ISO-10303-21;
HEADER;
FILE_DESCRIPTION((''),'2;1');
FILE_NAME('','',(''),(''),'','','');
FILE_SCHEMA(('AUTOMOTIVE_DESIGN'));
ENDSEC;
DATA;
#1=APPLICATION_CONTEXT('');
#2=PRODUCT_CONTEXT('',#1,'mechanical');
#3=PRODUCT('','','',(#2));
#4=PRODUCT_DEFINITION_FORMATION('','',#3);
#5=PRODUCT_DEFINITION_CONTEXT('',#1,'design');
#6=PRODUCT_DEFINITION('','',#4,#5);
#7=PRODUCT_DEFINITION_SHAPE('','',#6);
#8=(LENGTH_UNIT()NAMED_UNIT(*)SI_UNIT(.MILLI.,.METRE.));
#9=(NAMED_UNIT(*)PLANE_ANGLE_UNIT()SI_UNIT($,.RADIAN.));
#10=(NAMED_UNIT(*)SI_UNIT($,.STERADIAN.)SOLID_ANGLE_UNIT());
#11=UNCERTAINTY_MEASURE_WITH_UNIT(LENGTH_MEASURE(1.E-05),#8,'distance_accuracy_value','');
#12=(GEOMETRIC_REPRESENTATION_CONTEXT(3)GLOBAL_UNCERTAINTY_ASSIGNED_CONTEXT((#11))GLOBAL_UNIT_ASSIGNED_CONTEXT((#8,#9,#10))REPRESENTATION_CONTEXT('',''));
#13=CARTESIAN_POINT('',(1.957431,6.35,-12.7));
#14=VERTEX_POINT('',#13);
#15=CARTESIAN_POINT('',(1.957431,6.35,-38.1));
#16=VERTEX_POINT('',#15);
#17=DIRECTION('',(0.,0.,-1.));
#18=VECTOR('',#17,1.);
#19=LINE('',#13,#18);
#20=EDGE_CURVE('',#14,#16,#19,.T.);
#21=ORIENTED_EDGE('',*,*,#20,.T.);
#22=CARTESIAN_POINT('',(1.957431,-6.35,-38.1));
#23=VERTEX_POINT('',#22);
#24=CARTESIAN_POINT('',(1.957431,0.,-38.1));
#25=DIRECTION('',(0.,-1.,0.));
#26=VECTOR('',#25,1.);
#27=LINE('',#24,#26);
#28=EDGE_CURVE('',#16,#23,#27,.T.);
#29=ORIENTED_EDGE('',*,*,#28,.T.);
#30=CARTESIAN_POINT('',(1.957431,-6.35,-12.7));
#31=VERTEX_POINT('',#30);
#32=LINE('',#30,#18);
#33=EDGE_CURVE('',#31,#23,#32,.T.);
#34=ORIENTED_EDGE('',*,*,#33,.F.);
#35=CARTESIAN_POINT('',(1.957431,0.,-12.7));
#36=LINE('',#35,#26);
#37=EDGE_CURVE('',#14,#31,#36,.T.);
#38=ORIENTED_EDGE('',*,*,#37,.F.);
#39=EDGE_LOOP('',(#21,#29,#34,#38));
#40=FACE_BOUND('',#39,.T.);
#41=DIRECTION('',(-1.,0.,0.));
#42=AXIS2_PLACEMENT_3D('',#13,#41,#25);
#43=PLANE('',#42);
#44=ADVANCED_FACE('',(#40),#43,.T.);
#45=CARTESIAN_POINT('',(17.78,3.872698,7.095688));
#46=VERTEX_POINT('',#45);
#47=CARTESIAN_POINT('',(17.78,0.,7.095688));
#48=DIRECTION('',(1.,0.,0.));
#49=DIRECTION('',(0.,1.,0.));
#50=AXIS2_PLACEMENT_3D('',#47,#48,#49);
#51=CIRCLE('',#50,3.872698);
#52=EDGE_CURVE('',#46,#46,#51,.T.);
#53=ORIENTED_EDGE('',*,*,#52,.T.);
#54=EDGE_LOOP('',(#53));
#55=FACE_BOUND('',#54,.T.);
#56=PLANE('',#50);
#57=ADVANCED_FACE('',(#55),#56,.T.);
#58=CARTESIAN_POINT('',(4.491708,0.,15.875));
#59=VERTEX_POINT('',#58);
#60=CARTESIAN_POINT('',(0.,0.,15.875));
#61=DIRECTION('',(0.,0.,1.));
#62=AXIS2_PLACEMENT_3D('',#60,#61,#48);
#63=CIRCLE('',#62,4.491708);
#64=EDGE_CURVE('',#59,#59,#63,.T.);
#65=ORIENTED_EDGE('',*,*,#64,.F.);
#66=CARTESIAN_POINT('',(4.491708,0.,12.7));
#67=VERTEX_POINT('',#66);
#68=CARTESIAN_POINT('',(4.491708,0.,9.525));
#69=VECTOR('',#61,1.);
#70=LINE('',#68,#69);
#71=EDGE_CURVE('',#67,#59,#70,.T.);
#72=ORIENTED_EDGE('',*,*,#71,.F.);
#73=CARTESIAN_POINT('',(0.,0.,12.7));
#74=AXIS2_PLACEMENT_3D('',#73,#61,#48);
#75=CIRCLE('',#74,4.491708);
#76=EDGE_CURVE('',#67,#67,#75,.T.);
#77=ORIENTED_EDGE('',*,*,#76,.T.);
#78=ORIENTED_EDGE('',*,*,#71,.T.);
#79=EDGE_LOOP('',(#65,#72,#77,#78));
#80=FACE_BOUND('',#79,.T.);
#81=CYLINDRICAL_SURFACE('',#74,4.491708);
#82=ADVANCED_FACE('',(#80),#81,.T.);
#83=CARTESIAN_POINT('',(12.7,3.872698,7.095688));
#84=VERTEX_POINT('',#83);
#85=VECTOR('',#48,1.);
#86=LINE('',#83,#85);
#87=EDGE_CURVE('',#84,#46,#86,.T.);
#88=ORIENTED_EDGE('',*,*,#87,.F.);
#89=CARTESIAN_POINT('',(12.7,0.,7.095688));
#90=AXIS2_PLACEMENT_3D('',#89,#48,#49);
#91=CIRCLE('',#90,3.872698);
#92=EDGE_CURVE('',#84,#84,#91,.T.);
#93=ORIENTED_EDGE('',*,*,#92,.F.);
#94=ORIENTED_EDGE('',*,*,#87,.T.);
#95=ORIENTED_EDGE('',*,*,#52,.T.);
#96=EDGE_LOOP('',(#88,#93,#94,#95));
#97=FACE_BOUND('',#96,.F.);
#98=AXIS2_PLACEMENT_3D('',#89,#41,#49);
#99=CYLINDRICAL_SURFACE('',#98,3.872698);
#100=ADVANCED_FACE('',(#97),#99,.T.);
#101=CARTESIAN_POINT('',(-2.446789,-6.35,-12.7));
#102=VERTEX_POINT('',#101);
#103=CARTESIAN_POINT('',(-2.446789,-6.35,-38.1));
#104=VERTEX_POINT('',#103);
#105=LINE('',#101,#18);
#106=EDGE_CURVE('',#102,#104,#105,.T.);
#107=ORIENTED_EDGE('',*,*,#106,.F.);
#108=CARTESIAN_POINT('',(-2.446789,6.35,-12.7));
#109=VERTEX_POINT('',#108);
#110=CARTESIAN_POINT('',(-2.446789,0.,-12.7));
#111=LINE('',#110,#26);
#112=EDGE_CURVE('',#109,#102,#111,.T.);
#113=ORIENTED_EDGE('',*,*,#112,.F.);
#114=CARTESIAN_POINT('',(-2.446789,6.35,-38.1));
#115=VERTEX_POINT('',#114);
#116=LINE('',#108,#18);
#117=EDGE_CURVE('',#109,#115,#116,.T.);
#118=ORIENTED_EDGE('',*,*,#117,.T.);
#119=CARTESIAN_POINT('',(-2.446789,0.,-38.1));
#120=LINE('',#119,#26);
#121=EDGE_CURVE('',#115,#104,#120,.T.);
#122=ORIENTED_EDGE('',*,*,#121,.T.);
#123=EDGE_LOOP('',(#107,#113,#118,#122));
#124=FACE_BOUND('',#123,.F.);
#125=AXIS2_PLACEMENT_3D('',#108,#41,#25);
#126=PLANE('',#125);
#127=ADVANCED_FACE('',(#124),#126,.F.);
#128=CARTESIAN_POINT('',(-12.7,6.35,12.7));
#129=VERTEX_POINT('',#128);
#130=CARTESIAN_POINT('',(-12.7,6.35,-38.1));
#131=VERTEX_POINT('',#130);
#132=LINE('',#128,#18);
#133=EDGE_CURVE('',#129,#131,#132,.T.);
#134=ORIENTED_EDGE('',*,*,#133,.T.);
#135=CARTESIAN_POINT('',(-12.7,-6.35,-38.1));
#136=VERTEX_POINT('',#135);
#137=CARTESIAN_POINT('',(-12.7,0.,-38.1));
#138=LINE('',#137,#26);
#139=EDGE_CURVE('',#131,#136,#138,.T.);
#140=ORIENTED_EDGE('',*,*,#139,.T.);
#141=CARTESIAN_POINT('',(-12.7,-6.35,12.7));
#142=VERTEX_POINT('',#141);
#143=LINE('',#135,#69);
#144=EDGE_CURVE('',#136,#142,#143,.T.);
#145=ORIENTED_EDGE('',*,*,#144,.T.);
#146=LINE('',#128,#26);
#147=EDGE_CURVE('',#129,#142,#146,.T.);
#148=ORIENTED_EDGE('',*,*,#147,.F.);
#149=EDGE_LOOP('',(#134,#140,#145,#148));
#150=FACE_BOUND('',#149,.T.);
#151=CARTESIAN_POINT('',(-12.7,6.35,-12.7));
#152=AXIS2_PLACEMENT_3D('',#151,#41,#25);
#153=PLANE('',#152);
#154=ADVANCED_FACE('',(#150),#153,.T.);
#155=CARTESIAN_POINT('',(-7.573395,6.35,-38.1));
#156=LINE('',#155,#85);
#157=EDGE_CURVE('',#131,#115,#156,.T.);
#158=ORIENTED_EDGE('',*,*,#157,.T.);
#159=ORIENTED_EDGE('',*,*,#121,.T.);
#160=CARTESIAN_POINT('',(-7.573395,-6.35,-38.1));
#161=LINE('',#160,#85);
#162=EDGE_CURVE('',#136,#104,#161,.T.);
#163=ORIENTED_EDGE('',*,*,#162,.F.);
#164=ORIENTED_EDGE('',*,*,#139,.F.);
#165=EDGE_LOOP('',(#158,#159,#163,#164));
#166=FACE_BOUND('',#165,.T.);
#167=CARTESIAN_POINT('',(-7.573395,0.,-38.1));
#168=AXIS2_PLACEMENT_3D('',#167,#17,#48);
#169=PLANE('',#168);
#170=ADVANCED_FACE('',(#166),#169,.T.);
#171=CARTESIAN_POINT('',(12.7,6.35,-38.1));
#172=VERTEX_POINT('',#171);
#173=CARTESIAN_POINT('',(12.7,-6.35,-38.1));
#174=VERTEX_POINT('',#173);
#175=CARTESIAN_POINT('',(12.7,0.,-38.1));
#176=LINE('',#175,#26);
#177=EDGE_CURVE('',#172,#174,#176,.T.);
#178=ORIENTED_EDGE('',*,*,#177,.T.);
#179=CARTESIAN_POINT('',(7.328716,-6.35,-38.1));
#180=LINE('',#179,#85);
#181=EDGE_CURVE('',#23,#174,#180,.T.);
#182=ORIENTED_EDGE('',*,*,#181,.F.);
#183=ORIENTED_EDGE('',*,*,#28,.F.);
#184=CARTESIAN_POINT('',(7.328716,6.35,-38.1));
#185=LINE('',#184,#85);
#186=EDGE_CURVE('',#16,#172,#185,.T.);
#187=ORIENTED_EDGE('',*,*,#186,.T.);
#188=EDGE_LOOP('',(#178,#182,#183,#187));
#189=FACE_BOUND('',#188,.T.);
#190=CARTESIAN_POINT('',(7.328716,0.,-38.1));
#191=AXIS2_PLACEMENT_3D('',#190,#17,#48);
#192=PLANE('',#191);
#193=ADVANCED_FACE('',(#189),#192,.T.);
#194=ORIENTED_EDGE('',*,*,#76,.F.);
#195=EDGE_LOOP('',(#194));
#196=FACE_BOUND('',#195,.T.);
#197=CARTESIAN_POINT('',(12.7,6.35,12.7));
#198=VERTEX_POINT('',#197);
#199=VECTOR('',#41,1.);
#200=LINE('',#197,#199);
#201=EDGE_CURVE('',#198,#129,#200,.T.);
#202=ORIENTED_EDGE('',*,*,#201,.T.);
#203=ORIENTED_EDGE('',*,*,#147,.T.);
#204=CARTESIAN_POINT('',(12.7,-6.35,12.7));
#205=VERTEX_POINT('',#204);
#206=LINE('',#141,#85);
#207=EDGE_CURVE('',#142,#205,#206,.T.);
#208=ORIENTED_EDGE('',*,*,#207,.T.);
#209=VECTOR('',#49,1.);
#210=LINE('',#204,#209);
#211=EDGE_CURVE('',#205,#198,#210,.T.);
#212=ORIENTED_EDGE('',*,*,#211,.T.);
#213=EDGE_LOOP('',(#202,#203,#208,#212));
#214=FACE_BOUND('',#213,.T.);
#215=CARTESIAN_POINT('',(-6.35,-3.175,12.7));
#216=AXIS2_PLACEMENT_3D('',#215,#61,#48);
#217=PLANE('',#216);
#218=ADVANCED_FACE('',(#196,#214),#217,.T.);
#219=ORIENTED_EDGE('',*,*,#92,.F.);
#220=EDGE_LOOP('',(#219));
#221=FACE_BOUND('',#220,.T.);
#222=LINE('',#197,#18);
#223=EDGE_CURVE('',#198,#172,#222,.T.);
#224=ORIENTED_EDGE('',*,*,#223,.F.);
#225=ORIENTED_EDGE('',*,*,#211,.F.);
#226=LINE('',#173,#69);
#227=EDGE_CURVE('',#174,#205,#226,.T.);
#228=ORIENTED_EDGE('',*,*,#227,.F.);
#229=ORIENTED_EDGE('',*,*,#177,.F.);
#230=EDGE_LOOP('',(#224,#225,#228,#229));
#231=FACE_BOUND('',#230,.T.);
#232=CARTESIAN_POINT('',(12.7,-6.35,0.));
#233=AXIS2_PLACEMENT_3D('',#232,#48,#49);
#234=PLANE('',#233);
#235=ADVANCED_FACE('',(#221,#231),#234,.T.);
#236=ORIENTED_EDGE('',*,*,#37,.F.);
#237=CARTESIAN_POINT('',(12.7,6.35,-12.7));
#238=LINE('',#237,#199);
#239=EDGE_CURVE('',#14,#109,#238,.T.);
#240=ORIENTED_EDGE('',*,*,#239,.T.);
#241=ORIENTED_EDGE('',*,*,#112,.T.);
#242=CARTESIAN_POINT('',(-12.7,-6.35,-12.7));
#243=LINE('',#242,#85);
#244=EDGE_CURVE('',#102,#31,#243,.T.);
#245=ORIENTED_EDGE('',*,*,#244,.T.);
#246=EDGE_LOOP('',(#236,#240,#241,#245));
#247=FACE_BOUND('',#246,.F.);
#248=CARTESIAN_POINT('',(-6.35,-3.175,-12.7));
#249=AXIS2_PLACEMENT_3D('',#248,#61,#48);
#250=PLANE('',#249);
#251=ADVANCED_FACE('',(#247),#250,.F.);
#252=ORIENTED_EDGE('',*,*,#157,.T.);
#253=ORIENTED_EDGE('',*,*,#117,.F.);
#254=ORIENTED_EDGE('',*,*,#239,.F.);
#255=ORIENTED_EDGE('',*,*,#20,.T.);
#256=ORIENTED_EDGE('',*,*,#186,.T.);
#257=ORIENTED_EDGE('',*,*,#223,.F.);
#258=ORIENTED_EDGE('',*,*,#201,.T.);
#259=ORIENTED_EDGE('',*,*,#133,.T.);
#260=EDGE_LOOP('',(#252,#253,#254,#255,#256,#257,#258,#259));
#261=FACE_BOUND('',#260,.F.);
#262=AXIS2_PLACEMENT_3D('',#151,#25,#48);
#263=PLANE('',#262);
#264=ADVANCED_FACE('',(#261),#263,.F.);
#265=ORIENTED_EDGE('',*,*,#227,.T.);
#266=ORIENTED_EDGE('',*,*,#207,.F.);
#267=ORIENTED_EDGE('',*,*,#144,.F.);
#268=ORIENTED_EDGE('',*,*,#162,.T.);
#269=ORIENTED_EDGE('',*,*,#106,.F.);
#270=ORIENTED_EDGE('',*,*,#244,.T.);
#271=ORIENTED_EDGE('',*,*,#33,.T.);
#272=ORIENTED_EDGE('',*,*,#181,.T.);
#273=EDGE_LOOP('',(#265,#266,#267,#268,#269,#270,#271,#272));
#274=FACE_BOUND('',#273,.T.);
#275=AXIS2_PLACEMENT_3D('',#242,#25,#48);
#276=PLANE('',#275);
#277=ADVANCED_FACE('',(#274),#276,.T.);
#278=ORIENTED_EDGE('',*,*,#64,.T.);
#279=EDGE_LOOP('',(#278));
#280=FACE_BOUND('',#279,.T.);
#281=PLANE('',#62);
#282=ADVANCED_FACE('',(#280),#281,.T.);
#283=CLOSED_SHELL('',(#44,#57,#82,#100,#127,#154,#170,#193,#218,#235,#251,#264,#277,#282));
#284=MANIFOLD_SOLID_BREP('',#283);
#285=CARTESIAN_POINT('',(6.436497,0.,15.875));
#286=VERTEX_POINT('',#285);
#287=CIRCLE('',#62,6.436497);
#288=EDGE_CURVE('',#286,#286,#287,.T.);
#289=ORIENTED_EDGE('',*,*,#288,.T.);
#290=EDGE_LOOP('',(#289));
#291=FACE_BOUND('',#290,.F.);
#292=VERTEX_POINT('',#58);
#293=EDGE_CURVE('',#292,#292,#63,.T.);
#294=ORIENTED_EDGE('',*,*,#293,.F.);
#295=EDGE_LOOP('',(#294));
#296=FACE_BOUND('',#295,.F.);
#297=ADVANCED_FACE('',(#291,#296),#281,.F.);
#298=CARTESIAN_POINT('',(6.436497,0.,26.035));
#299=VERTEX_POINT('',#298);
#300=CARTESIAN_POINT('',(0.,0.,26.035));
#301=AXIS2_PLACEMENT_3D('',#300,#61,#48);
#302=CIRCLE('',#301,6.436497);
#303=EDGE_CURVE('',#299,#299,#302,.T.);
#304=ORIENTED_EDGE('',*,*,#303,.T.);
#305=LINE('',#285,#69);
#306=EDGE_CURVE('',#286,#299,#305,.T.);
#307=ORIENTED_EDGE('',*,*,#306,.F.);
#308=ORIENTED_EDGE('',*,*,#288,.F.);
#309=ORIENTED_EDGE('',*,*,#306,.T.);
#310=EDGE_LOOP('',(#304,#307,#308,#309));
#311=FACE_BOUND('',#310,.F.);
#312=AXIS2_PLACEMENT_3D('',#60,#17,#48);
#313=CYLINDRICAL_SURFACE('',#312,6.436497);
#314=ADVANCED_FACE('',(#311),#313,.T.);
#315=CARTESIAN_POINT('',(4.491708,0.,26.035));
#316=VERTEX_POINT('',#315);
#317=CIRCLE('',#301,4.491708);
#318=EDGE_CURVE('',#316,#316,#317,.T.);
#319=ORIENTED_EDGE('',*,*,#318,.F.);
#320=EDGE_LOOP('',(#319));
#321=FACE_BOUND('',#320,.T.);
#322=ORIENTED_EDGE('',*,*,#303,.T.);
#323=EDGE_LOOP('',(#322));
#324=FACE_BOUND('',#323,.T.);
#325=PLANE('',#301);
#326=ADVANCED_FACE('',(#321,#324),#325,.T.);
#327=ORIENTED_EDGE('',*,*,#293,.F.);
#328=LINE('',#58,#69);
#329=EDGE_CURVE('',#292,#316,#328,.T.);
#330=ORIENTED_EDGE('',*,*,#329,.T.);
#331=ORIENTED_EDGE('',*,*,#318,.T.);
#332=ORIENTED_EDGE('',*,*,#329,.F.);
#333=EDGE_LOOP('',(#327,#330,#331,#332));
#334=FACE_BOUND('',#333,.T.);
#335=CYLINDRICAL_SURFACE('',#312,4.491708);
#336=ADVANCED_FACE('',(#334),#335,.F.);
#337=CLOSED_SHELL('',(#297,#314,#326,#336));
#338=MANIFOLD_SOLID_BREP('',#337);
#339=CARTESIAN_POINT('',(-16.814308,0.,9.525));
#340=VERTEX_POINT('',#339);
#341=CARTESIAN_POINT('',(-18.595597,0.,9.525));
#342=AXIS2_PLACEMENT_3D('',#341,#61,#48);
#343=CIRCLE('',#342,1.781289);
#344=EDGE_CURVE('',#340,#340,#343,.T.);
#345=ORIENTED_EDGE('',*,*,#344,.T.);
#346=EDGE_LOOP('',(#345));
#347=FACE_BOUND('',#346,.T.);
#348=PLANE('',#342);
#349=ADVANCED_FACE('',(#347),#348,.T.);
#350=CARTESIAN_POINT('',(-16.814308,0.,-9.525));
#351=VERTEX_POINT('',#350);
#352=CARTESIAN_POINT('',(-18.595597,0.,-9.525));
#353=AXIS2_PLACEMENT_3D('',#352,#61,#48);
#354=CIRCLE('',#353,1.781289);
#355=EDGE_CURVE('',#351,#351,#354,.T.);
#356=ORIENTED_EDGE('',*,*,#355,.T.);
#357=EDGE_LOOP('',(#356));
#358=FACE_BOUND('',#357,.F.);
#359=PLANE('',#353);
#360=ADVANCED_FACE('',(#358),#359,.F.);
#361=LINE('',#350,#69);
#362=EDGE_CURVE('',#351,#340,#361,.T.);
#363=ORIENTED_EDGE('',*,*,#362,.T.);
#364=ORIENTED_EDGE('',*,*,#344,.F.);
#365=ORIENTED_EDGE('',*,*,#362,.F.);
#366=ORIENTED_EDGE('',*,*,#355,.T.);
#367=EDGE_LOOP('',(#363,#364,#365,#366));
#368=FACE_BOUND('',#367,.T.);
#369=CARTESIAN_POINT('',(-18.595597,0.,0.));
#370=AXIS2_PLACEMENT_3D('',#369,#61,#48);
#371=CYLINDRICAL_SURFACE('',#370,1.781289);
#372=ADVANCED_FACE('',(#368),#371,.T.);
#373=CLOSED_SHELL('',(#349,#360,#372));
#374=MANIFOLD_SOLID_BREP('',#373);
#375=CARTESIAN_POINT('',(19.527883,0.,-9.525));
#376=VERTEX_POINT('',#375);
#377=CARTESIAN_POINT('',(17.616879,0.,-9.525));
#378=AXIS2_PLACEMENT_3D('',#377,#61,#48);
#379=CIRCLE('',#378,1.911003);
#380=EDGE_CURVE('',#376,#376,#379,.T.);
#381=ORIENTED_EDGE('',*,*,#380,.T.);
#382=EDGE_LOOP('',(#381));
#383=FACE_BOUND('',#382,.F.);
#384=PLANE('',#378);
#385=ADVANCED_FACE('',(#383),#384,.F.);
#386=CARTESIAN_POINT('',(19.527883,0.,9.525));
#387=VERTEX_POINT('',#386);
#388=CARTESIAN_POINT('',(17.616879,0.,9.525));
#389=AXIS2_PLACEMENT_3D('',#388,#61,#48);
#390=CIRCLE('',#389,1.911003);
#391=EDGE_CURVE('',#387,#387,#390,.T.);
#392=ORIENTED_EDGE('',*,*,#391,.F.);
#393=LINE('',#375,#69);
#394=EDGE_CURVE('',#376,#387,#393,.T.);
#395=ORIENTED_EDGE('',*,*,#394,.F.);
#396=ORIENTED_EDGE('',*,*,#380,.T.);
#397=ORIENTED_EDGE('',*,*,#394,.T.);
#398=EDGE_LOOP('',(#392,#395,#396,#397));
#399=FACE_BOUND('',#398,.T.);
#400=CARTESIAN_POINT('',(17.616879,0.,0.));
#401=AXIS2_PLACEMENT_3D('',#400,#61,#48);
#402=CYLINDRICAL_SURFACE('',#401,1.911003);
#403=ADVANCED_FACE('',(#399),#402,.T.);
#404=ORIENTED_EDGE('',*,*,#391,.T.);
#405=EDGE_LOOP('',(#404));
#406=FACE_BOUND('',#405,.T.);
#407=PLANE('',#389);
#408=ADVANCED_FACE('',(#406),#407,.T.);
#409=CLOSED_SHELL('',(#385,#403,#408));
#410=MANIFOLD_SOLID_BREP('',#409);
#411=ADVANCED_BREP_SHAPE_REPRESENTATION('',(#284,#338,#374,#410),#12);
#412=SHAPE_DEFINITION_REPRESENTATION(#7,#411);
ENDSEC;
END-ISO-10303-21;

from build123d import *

# Parameters (mm, degrees)
F0_W      = 12.7
F0_H      = 6.3499995352
F1_DEPTH  = 12.7
F2_R      = 4.4917075471
F3_DEPTH  = 3.175
F4_R      = 6.4364972291
F4_R_2    = 4.4917075471
F5_DEPTH  = 10.16
F8_R      = 3.8726977567
F9_DEPTH  = 5.08
F10_W     = 10.2532109383
F10_H     = 12.6999990704
F10_W_2   = 10.7425687972
F11_DEPTH = 25.4
F12_R     = 1.7812892701
F13_DEPTH = 9.525
F12_R_2   = 1.9110034549


# Not quite as in the source:
# - the program builds the solid bodies; features that only make, move or delete a surface that nothing else refers to are left out


with BuildPart() as f1:
    # F0 (on Top) → F1 (new body, symmetric)
    with BuildSketch(Plane.XY):
        with Locations((-6.35, -3.1749997676)):
            Rectangle(F0_W, F0_H)
        with Locations((6.35, -3.1749997676)):
            Rectangle(F0_W, F0_H)
        with Locations((-6.35, 3.1749997676)):
            Rectangle(F0_W, F0_H)
        with Locations((6.35, 3.1749997676)):
            Rectangle(F0_W, F0_H)
    extrude(amount=F1_DEPTH, both=True)

    # F2 (on face) → F3 (join, symmetric)
    with BuildSketch(Plane.XY.offset(12.7)):
        Circle(F2_R)
    extrude(amount=F3_DEPTH, both=True)

    # F8 (on face) → F9 (join)
    with BuildSketch(Plane.YZ.offset(12.7)):
        with Locations((0, 7.0956880227)):
            Circle(F8_R)
    extrude(amount=F9_DEPTH)

    # F10 (on face) → F11 (join)
    with BuildSketch(Plane(origin=(0, 0, -12.7), x_dir=(1, 0, 0), z_dir=(0, 0, -1))):
        with Locations((-7.5733945308, 0)):
            Rectangle(F10_W, F10_H)
        with Locations((7.3287156014, 0)):
            Rectangle(F10_W_2, F10_H)
    extrude(amount=F11_DEPTH)


with BuildPart() as f5:
    # F4 (on face) → F5 (new body)
    with BuildSketch(Plane.XY.offset(15.875)):
        Circle(F4_R)
        Circle(F4_R_2, mode=Mode.SUBTRACT)
    extrude(amount=F5_DEPTH)


with BuildPart() as f13:
    # F12 (on Top) → F13 (new body, symmetric)
    with BuildSketch(Plane.XY):
        with Locations((-18.5955967754, 0)):
            Circle(F12_R)
    extrude(amount=F13_DEPTH, both=True)


with BuildPart() as f13b:
    # F12 (on Top) → F13, piece 2 (new body, symmetric)
    with BuildSketch(Plane.XY):
        with Locations((17.616879195, 0)):
            Circle(F12_R_2)
    extrude(amount=F13_DEPTH, both=True)


solid = Compound([f1.part, f5.part, f13.part, f13b.part])
